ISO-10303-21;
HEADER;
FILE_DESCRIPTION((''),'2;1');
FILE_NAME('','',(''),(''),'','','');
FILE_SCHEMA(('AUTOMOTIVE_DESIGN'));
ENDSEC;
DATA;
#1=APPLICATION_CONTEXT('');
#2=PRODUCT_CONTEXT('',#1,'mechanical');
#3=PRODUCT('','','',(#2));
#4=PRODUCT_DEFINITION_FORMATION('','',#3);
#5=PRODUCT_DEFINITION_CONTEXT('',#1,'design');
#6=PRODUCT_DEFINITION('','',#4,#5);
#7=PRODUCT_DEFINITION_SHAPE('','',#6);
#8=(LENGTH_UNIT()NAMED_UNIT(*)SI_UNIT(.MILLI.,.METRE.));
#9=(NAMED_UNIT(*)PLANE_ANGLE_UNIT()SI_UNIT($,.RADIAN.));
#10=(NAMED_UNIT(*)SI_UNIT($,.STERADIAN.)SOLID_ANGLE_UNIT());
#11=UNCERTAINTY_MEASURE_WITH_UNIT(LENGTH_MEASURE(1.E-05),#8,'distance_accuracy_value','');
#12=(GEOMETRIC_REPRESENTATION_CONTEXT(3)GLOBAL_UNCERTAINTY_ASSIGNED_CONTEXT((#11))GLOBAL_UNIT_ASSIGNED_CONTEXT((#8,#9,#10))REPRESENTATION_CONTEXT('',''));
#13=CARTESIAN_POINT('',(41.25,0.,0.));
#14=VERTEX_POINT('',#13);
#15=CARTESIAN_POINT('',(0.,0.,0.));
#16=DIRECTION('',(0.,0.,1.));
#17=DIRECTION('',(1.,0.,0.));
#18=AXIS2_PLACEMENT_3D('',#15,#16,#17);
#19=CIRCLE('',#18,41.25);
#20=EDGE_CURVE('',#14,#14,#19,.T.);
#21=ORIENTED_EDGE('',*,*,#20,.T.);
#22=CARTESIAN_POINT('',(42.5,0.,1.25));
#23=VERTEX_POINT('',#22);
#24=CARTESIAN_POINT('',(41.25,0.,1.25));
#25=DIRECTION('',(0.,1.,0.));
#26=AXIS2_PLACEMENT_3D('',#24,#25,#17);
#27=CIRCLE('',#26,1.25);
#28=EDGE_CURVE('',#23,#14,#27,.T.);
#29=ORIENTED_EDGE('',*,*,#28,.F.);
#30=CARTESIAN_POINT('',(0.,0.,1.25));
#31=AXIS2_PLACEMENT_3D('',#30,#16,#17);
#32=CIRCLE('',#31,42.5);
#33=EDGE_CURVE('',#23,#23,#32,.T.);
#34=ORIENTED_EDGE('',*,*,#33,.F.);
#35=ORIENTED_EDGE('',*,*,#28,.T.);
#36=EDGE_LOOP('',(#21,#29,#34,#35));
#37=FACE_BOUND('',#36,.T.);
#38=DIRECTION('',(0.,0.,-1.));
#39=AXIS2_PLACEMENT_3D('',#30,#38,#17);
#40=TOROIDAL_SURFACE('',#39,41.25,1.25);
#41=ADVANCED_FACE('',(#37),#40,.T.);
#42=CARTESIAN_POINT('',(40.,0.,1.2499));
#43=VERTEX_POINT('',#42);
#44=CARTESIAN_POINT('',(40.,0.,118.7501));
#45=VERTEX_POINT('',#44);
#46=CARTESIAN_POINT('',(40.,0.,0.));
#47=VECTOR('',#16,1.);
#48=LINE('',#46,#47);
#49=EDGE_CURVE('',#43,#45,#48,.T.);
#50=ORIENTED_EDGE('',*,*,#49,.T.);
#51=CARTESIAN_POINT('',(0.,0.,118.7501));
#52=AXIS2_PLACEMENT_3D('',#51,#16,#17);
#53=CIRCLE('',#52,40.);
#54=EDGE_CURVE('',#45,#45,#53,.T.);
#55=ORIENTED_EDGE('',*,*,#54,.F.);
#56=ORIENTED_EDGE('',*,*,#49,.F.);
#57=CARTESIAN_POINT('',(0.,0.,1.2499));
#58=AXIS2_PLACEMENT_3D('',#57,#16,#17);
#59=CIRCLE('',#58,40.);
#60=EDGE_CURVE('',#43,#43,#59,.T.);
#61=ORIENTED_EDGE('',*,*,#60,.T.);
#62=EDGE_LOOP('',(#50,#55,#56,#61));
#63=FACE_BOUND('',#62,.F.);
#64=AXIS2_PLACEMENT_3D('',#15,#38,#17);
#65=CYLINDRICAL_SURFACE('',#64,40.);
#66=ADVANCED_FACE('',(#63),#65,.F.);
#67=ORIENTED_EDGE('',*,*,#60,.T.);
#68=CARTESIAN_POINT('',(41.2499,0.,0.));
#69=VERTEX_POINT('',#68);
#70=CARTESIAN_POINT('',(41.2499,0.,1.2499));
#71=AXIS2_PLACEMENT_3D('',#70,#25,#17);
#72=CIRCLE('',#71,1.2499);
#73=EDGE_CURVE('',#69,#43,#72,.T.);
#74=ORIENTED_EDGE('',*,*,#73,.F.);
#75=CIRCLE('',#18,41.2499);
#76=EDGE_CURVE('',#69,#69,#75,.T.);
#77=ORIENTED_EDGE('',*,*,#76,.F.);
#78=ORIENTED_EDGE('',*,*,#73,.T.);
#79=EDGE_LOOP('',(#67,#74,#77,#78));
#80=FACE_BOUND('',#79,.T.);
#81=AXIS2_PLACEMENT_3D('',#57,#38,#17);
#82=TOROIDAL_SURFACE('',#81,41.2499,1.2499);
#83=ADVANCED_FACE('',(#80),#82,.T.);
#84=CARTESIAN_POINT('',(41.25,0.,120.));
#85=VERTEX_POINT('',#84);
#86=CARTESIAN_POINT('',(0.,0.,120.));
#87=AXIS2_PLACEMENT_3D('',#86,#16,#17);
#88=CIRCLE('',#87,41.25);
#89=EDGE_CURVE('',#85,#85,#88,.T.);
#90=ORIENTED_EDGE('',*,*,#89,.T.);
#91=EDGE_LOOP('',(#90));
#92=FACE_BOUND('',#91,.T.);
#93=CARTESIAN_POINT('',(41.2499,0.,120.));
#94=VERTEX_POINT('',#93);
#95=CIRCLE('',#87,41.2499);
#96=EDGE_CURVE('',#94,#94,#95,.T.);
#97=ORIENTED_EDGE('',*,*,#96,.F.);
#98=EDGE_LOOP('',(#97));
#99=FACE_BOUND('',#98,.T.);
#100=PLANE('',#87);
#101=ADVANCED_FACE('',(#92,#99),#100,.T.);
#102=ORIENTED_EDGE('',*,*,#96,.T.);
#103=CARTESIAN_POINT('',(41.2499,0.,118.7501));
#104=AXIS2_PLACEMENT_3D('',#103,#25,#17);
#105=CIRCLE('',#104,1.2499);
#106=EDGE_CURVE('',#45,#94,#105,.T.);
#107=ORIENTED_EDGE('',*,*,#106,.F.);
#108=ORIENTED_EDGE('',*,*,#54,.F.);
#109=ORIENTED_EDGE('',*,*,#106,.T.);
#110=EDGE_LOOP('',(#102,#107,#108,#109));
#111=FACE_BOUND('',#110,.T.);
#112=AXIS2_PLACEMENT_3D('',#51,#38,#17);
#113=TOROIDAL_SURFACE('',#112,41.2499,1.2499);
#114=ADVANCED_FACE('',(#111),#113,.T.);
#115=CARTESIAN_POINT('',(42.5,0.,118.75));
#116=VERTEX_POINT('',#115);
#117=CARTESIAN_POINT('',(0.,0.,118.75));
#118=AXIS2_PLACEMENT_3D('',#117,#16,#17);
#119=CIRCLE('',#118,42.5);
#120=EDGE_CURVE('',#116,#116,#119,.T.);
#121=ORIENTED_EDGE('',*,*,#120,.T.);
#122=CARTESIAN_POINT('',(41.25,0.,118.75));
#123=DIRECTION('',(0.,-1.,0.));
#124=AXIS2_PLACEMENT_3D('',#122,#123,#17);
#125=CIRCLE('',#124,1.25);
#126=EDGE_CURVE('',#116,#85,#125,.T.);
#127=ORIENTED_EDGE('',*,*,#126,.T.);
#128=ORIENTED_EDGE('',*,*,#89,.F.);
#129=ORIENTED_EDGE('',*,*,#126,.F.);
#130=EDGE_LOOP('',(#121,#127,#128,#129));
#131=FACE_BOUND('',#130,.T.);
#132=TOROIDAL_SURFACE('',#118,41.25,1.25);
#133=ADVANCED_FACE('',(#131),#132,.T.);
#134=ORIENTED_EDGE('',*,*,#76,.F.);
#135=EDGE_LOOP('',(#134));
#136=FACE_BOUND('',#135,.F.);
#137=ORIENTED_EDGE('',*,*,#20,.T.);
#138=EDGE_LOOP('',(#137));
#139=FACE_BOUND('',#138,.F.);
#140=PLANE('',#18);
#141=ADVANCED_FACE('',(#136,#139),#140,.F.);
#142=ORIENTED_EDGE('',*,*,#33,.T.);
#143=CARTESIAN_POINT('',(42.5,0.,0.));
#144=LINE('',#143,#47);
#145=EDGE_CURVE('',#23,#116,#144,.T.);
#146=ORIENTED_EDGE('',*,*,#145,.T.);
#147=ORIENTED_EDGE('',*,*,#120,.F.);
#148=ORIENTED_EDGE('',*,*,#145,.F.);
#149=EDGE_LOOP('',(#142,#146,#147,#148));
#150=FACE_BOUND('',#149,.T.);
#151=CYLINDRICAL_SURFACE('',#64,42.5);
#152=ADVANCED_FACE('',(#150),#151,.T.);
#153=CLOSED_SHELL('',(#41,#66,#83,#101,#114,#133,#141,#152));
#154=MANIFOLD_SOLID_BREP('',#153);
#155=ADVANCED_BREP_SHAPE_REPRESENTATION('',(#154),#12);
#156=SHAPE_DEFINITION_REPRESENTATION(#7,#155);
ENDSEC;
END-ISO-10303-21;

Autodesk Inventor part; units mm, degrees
ref_plane "YZ Plane" through (0, 0, 0) normal (1, 0, 0) x (0, 1, 0)
ref_plane "XZ Plane" through (0, 0, 0) normal (0, 1, 0) x (-1, 0, 0)
ref_plane "XY Plane" through (0, 0, 0) normal (0, 0, 1) x (1, 0, 0)
sketch "Sketch1" plane through (0, 0, 0) normal (0, 0, 1) x (1, 0, 0)
  circle A0 centre (0, 0) radius 42.5
  circle A1 centre (0, 0) radius 40
  dimension "d0" = 85
  dimension "d1" = 80
extrude "Extrusion1" add sketch "Sketch1" along normal blind 120
fillet "Fillet1" radius 1.25 1 edges at (-42.5, 0, 120)
fillet "Fillet2" radius 1.25 1 edges at (-42.5, 0, 0)
fillet "Fillet3" radius 1.25 1 edges at (-40, 0, 0)
fillet "Fillet4" radius 1.25 1 edges at (-40, 0, 120)
equation "\"d0\" = OuterDiameter"
equation "\"d1\" = InnerDiameter"
equation "\"d2\" = height"
equation "\"d4\" = fillet"
equation "\"d5\" = fillet"
equation "\"d6\" = fillet"
equation "\"d7\" = fillet"
equation "\"OuterDiameter\" = InnerDiameter + thickness"
equation "\"InnerDiameter\" = 80"
equation "\"thickness\" = 5"
equation "\"height\" = 120"
equation "\"fillet\" = 0.25 * thickness"
